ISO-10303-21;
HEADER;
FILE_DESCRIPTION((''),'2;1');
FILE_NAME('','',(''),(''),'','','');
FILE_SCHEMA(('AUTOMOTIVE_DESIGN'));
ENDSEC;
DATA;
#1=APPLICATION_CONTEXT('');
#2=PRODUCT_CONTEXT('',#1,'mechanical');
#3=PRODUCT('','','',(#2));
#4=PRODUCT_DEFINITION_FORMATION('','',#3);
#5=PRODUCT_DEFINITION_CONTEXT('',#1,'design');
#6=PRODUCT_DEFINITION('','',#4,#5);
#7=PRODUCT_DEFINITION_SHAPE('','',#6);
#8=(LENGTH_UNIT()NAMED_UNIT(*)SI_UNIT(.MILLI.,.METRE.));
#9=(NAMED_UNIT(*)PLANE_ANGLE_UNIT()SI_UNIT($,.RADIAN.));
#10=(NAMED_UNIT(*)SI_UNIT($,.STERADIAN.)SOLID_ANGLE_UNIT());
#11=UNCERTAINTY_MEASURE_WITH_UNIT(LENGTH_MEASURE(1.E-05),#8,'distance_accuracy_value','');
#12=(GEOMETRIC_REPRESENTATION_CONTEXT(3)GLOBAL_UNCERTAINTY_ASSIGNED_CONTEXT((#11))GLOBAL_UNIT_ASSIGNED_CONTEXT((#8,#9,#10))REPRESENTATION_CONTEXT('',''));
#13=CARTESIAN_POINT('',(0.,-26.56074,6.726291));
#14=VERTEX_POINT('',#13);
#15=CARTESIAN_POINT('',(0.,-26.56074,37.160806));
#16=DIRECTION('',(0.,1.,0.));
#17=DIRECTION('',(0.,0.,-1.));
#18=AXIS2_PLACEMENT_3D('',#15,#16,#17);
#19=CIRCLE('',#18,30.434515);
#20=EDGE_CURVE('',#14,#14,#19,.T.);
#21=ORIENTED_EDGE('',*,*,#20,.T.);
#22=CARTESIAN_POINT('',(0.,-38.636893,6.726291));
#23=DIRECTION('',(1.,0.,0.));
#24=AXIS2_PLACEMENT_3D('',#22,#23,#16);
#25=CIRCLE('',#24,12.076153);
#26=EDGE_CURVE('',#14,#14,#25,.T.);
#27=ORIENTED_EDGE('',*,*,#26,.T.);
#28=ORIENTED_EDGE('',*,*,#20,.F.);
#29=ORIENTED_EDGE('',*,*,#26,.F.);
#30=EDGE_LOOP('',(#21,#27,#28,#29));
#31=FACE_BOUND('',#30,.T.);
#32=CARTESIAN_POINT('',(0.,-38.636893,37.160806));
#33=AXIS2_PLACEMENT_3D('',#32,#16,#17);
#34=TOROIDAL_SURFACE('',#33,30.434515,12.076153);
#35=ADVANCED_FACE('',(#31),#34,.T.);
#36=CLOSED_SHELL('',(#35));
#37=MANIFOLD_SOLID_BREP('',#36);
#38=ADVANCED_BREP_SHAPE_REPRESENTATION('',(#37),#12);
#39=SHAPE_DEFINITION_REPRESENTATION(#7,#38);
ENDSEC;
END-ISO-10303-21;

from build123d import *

# Parameters (mm, degrees)
F3_R = 12.0761533709


# Not quite as in the source:
# - the program builds the solid bodies; features that only make, move or delete a surface that nothing else refers to are left out


with BuildPart() as f4:
    # F3 (on Right) → F4 (revolve)
    with BuildSketch(Plane.YZ):
        with Locations((-38.636893034, 6.7262914963)):
            Circle(F3_R)
    revolve(axis=Axis((0, -38.6390378699, 37.1608063579), (0, 1, 0)))


solid = f4.part
